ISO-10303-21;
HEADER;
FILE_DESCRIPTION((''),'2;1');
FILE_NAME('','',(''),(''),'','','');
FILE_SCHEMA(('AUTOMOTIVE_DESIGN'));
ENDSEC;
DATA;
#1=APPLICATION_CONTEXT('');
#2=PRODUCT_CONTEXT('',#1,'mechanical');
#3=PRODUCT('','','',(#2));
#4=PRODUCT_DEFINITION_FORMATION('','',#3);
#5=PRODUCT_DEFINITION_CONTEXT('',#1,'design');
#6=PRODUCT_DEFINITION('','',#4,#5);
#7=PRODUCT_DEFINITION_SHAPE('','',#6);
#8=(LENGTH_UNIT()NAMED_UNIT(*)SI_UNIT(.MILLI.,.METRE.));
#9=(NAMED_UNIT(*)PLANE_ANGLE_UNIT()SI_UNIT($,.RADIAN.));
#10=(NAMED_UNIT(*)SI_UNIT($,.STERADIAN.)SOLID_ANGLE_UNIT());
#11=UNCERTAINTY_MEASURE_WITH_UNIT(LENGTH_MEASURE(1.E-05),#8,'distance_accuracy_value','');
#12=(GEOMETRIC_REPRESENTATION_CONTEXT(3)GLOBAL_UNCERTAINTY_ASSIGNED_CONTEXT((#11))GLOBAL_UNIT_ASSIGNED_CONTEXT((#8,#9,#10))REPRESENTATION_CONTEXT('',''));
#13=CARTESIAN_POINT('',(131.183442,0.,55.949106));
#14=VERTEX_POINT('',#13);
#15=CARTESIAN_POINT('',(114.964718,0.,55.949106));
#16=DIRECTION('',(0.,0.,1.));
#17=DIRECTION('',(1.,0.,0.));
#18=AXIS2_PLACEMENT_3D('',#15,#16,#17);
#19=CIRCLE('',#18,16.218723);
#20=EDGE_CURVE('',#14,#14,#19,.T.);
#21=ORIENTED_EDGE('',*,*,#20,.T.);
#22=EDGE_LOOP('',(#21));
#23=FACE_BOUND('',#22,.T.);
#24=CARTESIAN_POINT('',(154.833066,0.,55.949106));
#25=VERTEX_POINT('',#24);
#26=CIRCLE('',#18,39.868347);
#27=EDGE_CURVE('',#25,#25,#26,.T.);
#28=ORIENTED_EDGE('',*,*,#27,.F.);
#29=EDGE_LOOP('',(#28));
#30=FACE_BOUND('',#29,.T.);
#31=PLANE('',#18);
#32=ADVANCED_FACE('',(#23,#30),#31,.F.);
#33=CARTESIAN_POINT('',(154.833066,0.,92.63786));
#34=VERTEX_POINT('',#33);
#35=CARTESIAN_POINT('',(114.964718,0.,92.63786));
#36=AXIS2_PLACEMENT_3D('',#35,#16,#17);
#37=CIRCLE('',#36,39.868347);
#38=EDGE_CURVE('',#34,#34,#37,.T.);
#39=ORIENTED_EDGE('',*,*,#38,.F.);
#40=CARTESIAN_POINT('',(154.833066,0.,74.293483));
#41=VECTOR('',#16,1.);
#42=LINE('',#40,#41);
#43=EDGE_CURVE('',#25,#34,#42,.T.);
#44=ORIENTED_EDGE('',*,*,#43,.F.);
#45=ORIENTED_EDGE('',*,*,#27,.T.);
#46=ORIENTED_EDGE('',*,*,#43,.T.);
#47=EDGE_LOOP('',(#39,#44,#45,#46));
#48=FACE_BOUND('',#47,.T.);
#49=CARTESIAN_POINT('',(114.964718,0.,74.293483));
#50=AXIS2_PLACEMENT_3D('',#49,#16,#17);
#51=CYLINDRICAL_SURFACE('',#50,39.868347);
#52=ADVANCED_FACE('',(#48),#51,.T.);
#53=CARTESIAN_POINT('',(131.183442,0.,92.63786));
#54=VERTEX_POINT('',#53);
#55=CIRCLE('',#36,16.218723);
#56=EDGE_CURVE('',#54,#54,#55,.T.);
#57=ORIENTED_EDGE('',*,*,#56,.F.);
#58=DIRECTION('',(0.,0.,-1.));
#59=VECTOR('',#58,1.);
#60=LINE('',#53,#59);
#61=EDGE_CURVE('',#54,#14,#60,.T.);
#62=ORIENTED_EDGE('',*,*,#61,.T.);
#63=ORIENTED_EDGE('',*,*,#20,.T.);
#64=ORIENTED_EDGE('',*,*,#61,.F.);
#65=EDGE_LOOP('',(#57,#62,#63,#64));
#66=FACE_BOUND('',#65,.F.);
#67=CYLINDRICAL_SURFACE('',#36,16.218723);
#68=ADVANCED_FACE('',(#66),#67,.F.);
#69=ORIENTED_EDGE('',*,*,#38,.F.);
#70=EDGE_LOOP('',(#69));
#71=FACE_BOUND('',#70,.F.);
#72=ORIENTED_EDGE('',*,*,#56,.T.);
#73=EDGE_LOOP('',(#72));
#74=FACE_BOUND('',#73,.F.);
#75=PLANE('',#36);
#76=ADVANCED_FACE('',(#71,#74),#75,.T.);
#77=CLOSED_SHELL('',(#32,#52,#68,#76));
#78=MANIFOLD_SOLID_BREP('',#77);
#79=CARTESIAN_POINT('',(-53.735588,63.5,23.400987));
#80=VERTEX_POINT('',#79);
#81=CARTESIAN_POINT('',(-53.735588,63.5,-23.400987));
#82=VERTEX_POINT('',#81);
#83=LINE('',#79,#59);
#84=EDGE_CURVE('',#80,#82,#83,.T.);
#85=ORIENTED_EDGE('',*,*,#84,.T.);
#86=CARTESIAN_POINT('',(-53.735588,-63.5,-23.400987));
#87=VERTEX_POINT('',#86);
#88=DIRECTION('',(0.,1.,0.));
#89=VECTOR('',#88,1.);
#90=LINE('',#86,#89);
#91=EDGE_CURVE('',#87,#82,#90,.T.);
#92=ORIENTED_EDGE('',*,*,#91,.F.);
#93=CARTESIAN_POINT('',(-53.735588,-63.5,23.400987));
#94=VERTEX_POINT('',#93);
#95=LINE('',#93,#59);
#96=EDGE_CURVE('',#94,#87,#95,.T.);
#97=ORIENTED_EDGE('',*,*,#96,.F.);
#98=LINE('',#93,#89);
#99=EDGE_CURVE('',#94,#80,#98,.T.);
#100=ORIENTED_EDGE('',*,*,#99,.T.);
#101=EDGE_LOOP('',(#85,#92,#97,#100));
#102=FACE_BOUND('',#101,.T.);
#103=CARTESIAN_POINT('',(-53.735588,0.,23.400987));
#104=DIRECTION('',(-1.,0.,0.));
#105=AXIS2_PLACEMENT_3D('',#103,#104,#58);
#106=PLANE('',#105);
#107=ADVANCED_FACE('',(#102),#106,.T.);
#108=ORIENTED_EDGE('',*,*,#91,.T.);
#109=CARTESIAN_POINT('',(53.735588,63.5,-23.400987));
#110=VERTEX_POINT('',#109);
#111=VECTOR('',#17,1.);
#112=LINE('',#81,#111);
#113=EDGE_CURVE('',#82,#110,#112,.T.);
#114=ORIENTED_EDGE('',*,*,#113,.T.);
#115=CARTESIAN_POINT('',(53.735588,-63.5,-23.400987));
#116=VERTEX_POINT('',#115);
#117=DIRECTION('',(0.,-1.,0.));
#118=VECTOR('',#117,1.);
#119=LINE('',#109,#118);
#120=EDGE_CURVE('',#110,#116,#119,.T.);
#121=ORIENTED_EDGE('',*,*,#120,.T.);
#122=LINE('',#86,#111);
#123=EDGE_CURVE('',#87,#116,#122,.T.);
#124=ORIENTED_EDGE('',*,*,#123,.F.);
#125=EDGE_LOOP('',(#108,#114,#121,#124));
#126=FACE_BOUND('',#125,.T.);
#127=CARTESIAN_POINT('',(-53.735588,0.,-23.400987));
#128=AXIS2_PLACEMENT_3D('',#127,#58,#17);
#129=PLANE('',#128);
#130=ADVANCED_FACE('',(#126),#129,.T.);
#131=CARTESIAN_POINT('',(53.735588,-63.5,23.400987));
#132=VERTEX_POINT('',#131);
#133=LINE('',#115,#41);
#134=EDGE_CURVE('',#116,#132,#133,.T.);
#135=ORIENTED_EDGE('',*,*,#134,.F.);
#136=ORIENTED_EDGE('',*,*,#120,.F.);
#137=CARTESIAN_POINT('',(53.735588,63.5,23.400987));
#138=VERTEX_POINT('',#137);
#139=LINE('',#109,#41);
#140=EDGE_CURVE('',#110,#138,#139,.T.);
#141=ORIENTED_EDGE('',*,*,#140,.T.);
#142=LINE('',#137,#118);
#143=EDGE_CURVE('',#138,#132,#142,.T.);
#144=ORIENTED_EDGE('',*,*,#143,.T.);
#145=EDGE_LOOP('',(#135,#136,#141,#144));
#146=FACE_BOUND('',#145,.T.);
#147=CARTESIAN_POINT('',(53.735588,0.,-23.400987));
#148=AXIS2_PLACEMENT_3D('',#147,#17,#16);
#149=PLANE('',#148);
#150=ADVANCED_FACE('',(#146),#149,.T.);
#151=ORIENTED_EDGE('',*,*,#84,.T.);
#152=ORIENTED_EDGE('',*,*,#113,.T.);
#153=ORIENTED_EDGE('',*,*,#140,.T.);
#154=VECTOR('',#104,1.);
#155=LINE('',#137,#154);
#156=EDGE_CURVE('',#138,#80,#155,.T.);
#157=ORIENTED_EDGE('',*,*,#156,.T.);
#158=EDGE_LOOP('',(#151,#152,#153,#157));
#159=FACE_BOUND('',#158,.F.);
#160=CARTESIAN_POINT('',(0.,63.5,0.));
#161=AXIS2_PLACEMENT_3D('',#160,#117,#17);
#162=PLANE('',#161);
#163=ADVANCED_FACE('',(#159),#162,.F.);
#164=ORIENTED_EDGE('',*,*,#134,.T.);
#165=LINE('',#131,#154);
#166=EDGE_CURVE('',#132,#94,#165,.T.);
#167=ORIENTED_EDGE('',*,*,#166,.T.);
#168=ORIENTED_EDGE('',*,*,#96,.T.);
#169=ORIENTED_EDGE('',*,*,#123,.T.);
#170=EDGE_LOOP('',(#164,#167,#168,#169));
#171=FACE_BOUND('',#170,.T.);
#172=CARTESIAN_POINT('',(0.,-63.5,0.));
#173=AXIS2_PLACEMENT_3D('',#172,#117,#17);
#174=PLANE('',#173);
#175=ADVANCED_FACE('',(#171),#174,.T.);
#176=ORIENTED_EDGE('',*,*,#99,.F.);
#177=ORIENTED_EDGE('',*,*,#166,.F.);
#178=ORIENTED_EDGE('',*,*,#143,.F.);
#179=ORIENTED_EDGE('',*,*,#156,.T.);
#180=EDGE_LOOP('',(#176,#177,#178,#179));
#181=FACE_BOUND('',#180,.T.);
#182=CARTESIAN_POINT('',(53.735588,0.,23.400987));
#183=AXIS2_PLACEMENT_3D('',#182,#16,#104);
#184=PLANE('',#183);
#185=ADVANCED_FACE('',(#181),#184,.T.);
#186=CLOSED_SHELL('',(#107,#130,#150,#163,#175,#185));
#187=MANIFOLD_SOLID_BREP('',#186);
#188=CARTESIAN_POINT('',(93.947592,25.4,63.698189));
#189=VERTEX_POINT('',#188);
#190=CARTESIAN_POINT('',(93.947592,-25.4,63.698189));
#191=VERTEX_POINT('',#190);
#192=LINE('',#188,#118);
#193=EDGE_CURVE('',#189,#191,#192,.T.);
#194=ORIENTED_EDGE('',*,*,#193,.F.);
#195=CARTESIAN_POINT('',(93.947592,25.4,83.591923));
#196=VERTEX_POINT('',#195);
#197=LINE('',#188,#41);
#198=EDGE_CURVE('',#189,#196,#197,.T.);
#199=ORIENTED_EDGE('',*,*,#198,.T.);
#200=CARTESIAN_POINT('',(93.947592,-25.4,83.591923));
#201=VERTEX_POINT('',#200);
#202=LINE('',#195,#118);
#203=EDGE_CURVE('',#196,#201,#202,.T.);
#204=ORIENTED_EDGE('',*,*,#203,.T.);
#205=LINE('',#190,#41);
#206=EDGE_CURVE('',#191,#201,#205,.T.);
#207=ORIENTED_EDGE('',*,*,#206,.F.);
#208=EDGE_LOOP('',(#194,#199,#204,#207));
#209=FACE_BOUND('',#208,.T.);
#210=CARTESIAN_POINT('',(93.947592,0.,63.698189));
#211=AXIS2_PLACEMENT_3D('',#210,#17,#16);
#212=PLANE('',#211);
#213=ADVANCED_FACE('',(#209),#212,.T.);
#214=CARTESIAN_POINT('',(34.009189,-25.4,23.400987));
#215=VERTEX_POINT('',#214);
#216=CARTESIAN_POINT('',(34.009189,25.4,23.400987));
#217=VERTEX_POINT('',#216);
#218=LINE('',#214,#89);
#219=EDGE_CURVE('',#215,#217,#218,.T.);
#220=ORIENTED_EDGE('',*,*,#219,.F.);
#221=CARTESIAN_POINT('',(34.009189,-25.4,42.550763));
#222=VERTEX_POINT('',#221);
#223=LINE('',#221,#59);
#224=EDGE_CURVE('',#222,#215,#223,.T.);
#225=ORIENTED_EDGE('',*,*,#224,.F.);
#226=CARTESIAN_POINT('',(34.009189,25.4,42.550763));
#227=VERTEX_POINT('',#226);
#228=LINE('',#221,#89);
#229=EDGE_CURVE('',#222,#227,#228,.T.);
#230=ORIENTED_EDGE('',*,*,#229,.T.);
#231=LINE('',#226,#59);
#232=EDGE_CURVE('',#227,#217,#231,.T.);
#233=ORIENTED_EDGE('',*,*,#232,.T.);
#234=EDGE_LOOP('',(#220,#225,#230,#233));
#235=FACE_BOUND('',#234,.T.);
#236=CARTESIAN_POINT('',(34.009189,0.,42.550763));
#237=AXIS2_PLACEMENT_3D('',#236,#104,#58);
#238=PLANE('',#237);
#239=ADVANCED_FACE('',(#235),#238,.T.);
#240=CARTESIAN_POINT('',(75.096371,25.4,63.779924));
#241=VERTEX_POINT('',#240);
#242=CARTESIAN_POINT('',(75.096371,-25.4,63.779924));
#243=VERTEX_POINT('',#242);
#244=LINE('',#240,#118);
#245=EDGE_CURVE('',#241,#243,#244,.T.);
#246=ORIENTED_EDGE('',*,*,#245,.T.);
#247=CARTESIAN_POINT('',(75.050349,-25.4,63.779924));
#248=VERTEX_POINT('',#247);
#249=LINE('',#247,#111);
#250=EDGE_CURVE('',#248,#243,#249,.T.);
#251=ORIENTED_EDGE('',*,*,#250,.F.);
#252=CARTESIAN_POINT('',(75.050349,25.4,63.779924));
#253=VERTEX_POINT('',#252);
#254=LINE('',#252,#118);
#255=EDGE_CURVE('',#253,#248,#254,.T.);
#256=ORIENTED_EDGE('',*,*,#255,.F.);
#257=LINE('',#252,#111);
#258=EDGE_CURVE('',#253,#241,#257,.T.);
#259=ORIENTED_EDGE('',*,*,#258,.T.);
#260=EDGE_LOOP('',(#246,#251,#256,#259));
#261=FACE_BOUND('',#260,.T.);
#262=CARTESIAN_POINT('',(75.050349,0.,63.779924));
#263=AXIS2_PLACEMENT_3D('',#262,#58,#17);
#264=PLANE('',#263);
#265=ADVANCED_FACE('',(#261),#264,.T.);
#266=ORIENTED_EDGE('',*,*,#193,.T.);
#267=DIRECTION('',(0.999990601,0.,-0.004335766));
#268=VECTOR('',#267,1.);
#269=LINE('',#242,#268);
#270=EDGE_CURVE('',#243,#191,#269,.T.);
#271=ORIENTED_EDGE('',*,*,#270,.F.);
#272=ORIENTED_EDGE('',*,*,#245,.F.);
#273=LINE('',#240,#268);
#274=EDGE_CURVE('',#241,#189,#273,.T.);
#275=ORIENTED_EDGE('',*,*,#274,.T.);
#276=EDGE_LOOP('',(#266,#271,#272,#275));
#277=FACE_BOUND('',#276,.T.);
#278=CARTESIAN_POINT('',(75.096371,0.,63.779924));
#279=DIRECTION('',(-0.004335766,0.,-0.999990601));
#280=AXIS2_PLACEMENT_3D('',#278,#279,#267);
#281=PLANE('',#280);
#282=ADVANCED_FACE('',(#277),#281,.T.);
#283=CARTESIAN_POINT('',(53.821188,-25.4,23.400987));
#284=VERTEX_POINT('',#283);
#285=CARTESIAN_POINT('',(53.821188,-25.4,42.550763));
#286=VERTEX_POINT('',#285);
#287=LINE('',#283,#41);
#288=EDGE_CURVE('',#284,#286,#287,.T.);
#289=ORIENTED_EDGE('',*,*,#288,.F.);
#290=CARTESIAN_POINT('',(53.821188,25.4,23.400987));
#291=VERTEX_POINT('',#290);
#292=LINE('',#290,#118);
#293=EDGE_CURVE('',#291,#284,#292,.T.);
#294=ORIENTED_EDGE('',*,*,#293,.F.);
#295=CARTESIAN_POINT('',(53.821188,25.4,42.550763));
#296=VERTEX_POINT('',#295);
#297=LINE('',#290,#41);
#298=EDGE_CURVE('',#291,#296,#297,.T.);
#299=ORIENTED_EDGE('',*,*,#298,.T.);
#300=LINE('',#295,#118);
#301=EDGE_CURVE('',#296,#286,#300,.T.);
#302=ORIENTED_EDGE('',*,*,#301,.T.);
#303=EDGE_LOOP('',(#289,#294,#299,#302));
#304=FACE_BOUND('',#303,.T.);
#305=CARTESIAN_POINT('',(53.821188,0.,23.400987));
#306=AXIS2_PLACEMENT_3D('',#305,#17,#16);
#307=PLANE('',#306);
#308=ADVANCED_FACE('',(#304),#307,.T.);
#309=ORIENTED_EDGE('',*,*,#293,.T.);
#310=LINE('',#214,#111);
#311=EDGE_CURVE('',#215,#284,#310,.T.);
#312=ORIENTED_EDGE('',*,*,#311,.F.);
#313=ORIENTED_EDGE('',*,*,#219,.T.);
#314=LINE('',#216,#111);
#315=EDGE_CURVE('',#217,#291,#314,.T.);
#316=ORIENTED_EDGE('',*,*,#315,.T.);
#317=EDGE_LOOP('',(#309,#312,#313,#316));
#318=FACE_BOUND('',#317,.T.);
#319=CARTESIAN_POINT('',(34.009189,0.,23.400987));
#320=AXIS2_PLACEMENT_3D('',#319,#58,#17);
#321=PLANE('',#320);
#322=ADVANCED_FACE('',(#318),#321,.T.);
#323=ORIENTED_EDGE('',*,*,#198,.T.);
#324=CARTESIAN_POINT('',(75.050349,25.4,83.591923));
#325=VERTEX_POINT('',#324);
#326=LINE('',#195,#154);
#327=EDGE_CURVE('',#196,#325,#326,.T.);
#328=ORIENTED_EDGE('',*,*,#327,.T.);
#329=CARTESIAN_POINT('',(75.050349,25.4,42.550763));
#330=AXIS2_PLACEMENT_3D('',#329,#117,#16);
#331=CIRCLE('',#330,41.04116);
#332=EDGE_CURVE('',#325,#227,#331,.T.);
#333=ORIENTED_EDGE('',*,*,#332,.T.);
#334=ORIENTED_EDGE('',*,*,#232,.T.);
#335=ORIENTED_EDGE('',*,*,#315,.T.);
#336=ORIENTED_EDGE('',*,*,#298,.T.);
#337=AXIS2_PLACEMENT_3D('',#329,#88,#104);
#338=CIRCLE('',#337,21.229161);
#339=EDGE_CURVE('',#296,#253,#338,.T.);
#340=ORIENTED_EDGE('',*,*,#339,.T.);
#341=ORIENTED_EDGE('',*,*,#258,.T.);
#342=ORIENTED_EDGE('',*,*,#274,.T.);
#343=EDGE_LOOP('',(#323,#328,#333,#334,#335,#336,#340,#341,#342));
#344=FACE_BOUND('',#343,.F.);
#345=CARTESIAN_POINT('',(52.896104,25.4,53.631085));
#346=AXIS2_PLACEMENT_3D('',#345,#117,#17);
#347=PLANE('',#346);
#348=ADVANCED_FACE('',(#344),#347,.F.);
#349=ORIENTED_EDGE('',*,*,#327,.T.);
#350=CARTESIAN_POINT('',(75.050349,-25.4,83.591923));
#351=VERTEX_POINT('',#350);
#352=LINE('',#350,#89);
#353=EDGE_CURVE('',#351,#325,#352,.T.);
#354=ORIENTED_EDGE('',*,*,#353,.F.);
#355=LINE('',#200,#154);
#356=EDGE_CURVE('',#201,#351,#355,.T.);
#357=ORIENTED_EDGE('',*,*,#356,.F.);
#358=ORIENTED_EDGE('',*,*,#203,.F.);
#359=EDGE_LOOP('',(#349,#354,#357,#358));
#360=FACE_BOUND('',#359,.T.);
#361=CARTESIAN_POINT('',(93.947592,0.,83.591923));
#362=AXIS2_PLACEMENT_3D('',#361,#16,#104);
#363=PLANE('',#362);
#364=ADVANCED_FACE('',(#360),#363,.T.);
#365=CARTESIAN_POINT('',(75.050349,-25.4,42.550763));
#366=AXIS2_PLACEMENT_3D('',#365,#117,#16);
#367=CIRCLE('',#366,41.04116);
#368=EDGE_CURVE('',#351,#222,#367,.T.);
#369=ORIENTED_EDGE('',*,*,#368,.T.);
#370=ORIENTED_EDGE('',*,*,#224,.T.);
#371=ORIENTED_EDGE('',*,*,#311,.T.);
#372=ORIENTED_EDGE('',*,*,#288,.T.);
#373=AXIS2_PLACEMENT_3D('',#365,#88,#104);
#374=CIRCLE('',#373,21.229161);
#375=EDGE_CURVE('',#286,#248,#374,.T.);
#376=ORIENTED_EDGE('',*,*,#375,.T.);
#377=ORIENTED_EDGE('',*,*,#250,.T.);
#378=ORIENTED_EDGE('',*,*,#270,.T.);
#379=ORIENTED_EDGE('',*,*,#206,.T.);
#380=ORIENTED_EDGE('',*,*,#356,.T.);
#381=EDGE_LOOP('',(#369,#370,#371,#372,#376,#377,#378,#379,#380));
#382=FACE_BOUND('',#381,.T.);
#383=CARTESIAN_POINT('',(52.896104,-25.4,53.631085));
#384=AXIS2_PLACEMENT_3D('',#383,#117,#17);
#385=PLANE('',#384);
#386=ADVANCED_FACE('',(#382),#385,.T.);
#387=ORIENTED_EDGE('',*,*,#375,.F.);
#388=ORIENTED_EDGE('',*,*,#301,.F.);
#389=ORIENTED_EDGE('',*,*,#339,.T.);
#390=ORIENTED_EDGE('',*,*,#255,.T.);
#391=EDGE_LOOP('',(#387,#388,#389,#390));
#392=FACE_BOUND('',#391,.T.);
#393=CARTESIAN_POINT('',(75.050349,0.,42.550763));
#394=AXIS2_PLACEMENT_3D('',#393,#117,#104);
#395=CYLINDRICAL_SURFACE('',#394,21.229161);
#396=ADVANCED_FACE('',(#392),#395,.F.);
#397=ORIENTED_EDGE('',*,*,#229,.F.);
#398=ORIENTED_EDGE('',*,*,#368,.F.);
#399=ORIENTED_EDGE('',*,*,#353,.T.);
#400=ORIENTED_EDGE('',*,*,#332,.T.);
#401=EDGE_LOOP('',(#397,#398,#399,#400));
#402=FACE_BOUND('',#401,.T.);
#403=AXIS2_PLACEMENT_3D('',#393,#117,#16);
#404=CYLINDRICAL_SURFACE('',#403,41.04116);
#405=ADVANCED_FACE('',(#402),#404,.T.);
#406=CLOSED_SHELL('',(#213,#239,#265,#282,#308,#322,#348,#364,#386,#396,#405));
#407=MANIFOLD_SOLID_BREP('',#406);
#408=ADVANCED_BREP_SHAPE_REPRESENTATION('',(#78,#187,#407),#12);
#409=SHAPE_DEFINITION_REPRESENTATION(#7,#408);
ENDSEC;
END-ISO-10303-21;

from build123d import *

# Parameters (mm, degrees)
F1_DEPTH = 63.5
F2_DEPTH = 25.4
F0_W     = 39.8683473468
F0_H     = 36.688753669
F4_R     = 16.2187232802
F5_DEPTH = 36.688753669


with BuildPart() as f1:
    # F0 (on Front) → F1 (new body, symmetric)
    with BuildSketch(Plane.XZ):
        Polygon((-53.7355877459, -23.4009865671), (53.7355877459, -23.4009865671), (53.7355877459, 23.4009865671), (34.0091888793, 23.4009865671), (-53.7355877459, 23.4009865671), align=None)
    extrude(amount=F1_DEPTH, both=True)


with BuildPart() as f2:
    # F0 (on Front) → F2 (new body, symmetric)
    with BuildSketch(Plane.XZ):
        with BuildLine():
            Line((34.0091888793, 23.4009865671), (53.7355877459, 23.4009865671))
            Line((53.7355877459, 23.4009865671), (53.821187932, 23.4009865671))
            Line((53.821187932, 23.4009865671), (53.821187932, 42.5507634298))
            ThreePointArc((53.821187932, 42.5507634298), (60.0390651231, 57.5620468738), (75.0503485671, 63.7799240649))
            Line((75.0503485671, 63.7799240649), (75.096371118, 63.7799240649))
            Line((75.096371118, 63.7799240649), (75.096371118, 83.5919231176))
            Line((75.096371118, 83.5919231176), (75.0503485671, 83.5919231176))
            ThreePointArc((75.0503485671, 83.5919231176), (46.0298662441, 71.5712457528), (34.0091888793, 42.5507634298))
            Line((34.0091888793, 42.5507634298), (34.0091888793, 23.4009865671))
        make_face()
        Polygon((93.9475916658, 83.5919231176), (75.096371118, 83.5919231176), (75.096371118, 63.7799240649), (93.9475916658, 63.6981888188), align=None)
    extrude(amount=F2_DEPTH, both=True)


with BuildPart() as f3:
    # F0 (on Front) → F3 (revolve)
    with BuildSketch(Plane.XZ):
        with Locations((134.8988921382, 74.2934830487)):
            Rectangle(F0_W, F0_H)
    revolve(axis=Axis((114.9647184648, 0, 74.2934830487), (0, 0, 1)))

    # F4 (on face) → F5 (cut, through all)
    with BuildSketch(Plane.XY.offset(92.6378598832)):
        with Locations((114.9647184648, 0)):
            Circle(F4_R)
    extrude(amount=-F5_DEPTH, mode=Mode.SUBTRACT)


solid = Compound([f1.part, f2.part, f3.part])
